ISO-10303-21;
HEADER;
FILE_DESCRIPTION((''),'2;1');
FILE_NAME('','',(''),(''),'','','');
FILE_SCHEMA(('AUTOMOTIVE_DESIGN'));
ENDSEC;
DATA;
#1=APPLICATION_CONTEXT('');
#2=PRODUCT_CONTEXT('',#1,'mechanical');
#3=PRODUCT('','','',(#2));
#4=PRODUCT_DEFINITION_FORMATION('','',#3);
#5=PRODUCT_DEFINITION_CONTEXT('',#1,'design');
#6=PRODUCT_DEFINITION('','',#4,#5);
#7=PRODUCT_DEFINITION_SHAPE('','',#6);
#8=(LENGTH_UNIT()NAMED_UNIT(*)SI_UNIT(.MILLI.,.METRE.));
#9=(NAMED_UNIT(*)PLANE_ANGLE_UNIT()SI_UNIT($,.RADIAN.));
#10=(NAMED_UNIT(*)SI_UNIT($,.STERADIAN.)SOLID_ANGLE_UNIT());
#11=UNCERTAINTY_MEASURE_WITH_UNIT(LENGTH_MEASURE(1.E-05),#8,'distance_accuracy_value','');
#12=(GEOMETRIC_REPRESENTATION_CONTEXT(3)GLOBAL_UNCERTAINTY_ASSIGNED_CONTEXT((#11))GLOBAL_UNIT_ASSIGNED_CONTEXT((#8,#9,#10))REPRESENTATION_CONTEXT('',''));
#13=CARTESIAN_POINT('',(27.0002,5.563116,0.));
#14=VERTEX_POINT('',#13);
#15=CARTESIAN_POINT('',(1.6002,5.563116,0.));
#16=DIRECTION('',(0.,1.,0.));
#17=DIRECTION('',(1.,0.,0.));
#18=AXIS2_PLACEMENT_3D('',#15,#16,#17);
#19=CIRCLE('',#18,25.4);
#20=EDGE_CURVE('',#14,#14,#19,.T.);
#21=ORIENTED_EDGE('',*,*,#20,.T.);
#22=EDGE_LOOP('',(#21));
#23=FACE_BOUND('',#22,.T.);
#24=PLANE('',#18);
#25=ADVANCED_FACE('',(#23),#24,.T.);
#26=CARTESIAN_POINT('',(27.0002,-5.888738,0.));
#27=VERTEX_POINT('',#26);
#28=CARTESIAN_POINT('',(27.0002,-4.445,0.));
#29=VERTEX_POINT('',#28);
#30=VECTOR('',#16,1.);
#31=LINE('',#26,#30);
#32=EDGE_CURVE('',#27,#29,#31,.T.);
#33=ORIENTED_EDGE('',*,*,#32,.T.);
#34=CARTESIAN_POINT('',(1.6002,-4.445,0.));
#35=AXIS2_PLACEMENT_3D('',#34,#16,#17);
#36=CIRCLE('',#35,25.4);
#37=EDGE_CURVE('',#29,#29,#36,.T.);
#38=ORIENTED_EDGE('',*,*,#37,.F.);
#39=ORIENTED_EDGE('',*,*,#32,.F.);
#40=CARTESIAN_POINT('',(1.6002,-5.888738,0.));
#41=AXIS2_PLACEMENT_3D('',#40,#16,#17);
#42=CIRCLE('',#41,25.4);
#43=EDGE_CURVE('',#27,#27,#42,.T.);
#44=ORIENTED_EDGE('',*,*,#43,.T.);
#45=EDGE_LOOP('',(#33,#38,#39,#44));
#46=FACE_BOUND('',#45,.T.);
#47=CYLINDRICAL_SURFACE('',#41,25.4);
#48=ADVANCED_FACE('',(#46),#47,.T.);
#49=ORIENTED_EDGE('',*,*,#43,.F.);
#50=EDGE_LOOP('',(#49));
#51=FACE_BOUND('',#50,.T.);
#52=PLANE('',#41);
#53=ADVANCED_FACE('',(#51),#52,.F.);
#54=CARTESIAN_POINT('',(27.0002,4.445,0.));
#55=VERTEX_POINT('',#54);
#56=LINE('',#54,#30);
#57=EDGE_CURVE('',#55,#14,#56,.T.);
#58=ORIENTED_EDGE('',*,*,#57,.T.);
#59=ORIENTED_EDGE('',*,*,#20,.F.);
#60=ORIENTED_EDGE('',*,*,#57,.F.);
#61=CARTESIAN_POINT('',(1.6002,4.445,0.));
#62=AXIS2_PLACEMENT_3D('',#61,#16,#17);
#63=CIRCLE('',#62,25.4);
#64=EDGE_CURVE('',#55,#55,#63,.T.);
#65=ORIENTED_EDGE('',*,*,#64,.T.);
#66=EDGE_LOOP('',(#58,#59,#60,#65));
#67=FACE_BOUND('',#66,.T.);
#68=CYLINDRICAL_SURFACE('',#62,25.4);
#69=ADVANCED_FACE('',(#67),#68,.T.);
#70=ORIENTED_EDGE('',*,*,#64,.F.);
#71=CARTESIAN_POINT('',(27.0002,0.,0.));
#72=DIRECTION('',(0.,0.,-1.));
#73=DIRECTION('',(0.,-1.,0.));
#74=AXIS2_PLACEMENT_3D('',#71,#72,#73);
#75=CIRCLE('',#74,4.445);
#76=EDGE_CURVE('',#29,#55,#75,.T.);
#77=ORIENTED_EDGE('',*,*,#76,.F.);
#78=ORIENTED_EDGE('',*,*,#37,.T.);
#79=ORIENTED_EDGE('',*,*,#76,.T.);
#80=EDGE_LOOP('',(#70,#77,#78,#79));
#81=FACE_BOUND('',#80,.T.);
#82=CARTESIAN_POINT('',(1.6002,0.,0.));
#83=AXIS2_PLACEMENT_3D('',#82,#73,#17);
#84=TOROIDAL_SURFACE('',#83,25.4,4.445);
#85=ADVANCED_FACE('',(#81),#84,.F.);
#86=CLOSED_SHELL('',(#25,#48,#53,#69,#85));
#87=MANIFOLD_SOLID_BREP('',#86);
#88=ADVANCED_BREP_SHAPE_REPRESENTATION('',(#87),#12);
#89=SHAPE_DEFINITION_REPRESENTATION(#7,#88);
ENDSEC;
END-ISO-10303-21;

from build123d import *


# Not quite as in the source:
# - the program builds the solid bodies; features that only make, move or delete a surface that nothing else refers to are left out


with BuildPart() as f1:
    # F0 (on Top) → F1 (revolve)
    with BuildSketch(Plane.XY):
        with BuildLine():
            Line((27.0002, 5.5631161949), (1.6002, 5.5631161949))
            Line((1.6002, 5.5631161949), (1.6002, -5.8887377381))
            Line((1.6002, -5.8887377381), (27.0002, -5.8887377381))
            Line((27.0002, -5.8887377381), (27.0002, -4.445))
            ThreePointArc((27.0002, -4.445), (22.5552, 0), (27.0002, 4.445))
            Line((27.0002, 4.445), (27.0002, 5.5631161949))
        make_face()
    revolve(axis=Axis((1.6002, -0.1628107716, 0), (0, 1, 0)))


solid = f1.part
